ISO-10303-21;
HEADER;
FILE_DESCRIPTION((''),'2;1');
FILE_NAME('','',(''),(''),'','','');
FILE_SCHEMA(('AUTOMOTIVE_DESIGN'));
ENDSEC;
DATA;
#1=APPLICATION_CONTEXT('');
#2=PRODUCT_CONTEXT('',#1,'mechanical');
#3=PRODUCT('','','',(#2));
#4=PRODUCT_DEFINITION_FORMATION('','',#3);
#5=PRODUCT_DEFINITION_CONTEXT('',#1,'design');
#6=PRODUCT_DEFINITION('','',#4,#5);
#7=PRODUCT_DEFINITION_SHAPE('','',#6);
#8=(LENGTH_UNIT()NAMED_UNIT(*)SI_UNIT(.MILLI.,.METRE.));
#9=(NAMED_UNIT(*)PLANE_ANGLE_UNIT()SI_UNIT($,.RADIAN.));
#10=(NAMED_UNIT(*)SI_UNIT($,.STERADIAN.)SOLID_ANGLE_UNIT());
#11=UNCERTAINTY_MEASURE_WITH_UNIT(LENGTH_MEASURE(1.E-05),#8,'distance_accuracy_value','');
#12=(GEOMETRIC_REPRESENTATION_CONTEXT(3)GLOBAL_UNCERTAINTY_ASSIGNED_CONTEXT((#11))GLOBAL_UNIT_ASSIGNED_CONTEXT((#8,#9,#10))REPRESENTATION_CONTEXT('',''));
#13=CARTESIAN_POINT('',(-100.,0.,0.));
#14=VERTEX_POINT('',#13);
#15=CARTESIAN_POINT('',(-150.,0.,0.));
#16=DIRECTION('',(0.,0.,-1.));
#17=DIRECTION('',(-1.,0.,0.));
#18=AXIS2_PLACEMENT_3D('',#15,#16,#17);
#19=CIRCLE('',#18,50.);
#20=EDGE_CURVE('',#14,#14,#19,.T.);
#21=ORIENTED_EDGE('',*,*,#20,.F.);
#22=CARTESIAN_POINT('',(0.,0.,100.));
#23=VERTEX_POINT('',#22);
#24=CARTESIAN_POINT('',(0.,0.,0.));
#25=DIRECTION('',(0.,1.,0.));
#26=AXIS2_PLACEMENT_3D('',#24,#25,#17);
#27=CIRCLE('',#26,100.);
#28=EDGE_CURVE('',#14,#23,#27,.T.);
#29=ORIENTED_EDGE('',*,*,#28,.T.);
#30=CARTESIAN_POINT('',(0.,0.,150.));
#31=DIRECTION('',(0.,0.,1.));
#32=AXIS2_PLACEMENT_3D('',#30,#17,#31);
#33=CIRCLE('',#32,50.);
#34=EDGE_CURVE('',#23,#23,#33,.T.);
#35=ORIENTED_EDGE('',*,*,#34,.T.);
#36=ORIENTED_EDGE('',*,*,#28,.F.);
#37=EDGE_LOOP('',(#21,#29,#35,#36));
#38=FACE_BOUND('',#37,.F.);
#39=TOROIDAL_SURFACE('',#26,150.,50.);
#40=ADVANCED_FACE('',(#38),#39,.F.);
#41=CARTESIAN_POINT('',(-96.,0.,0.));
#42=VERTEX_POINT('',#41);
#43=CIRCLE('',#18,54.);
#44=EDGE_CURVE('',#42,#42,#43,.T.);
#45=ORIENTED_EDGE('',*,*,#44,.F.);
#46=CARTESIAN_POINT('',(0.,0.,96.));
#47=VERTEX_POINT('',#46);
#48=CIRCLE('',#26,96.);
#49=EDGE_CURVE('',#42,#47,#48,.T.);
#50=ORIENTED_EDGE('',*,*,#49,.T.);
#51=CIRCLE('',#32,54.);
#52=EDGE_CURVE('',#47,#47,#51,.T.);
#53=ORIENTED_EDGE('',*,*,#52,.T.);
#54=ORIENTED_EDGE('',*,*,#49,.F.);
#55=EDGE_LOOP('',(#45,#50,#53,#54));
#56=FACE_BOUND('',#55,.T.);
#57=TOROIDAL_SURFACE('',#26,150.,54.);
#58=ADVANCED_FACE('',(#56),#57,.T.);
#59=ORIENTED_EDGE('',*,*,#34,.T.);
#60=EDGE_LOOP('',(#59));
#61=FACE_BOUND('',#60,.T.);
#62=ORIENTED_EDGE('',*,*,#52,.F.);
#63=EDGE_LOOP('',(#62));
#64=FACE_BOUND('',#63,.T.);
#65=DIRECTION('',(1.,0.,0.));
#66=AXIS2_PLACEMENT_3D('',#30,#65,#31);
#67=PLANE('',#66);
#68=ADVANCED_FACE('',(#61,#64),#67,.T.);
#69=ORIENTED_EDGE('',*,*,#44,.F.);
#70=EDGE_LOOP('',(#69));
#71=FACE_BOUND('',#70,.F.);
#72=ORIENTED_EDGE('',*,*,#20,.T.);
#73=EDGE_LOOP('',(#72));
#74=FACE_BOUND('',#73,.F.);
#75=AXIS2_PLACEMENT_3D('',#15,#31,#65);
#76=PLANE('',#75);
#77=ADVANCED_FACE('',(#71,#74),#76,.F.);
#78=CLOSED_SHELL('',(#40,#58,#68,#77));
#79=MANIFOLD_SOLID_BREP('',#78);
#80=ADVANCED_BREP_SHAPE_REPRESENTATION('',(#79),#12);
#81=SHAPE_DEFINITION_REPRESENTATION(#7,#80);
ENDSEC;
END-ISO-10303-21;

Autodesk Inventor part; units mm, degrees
ref_plane "YZ Plane" through (0, 0, 0) normal (1, 0, 0) x (0, 1, 0)
ref_plane "XZ Plane" through (0, 0, 0) normal (0, 1, 0) x (-1, 0, 0)
ref_plane "XY Plane" through (0, 0, 0) normal (0, 0, 1) x (1, 0, 0)
sketch "Sketch1" plane through (0, 0, 0) normal (0, 0, 1) x (1, 0, 0)
  line L0 (0, 0) -> (-150, 0)
  circle A0 centre (-150, 0) radius 50
  circle A1 centre (-150, 0) radius 54
  dimension "d2" = 108
  dimension "d3" = 4
  dimension "d4" = 150
sketch "Sketch2" plane through (0, 0, 0) normal (0, 1, 0) x (-1, 0, 0)
  arc A0 (150, 0) -> (0, 150) centre (0, 0) ccw
  line L0 (0, 0) -> (150, 0) construction
  line L1 (0, 0) -> (0, 150) construction
  dimension "d5" = 300
  dimension "d7" = 90
sweep "Колебание1" add profiles "Sketch1" path "Sketch2"
equation "\"d2\" = Dh"
equation "\"d3\" = S_"
equation "\"d4\" = R"
equation "\"d5\" = 2 * R"
equation "\"d7\" = Angle"
equation "\"Dh\" = 108"
equation "\"S_\" = 4"
equation "\"R\" = 150"
equation "\"Angle\" = 90deg"
properties part number "Отвод 90° 108x4 ГОСТ 17375-83" material "Сталь, мягкая"
